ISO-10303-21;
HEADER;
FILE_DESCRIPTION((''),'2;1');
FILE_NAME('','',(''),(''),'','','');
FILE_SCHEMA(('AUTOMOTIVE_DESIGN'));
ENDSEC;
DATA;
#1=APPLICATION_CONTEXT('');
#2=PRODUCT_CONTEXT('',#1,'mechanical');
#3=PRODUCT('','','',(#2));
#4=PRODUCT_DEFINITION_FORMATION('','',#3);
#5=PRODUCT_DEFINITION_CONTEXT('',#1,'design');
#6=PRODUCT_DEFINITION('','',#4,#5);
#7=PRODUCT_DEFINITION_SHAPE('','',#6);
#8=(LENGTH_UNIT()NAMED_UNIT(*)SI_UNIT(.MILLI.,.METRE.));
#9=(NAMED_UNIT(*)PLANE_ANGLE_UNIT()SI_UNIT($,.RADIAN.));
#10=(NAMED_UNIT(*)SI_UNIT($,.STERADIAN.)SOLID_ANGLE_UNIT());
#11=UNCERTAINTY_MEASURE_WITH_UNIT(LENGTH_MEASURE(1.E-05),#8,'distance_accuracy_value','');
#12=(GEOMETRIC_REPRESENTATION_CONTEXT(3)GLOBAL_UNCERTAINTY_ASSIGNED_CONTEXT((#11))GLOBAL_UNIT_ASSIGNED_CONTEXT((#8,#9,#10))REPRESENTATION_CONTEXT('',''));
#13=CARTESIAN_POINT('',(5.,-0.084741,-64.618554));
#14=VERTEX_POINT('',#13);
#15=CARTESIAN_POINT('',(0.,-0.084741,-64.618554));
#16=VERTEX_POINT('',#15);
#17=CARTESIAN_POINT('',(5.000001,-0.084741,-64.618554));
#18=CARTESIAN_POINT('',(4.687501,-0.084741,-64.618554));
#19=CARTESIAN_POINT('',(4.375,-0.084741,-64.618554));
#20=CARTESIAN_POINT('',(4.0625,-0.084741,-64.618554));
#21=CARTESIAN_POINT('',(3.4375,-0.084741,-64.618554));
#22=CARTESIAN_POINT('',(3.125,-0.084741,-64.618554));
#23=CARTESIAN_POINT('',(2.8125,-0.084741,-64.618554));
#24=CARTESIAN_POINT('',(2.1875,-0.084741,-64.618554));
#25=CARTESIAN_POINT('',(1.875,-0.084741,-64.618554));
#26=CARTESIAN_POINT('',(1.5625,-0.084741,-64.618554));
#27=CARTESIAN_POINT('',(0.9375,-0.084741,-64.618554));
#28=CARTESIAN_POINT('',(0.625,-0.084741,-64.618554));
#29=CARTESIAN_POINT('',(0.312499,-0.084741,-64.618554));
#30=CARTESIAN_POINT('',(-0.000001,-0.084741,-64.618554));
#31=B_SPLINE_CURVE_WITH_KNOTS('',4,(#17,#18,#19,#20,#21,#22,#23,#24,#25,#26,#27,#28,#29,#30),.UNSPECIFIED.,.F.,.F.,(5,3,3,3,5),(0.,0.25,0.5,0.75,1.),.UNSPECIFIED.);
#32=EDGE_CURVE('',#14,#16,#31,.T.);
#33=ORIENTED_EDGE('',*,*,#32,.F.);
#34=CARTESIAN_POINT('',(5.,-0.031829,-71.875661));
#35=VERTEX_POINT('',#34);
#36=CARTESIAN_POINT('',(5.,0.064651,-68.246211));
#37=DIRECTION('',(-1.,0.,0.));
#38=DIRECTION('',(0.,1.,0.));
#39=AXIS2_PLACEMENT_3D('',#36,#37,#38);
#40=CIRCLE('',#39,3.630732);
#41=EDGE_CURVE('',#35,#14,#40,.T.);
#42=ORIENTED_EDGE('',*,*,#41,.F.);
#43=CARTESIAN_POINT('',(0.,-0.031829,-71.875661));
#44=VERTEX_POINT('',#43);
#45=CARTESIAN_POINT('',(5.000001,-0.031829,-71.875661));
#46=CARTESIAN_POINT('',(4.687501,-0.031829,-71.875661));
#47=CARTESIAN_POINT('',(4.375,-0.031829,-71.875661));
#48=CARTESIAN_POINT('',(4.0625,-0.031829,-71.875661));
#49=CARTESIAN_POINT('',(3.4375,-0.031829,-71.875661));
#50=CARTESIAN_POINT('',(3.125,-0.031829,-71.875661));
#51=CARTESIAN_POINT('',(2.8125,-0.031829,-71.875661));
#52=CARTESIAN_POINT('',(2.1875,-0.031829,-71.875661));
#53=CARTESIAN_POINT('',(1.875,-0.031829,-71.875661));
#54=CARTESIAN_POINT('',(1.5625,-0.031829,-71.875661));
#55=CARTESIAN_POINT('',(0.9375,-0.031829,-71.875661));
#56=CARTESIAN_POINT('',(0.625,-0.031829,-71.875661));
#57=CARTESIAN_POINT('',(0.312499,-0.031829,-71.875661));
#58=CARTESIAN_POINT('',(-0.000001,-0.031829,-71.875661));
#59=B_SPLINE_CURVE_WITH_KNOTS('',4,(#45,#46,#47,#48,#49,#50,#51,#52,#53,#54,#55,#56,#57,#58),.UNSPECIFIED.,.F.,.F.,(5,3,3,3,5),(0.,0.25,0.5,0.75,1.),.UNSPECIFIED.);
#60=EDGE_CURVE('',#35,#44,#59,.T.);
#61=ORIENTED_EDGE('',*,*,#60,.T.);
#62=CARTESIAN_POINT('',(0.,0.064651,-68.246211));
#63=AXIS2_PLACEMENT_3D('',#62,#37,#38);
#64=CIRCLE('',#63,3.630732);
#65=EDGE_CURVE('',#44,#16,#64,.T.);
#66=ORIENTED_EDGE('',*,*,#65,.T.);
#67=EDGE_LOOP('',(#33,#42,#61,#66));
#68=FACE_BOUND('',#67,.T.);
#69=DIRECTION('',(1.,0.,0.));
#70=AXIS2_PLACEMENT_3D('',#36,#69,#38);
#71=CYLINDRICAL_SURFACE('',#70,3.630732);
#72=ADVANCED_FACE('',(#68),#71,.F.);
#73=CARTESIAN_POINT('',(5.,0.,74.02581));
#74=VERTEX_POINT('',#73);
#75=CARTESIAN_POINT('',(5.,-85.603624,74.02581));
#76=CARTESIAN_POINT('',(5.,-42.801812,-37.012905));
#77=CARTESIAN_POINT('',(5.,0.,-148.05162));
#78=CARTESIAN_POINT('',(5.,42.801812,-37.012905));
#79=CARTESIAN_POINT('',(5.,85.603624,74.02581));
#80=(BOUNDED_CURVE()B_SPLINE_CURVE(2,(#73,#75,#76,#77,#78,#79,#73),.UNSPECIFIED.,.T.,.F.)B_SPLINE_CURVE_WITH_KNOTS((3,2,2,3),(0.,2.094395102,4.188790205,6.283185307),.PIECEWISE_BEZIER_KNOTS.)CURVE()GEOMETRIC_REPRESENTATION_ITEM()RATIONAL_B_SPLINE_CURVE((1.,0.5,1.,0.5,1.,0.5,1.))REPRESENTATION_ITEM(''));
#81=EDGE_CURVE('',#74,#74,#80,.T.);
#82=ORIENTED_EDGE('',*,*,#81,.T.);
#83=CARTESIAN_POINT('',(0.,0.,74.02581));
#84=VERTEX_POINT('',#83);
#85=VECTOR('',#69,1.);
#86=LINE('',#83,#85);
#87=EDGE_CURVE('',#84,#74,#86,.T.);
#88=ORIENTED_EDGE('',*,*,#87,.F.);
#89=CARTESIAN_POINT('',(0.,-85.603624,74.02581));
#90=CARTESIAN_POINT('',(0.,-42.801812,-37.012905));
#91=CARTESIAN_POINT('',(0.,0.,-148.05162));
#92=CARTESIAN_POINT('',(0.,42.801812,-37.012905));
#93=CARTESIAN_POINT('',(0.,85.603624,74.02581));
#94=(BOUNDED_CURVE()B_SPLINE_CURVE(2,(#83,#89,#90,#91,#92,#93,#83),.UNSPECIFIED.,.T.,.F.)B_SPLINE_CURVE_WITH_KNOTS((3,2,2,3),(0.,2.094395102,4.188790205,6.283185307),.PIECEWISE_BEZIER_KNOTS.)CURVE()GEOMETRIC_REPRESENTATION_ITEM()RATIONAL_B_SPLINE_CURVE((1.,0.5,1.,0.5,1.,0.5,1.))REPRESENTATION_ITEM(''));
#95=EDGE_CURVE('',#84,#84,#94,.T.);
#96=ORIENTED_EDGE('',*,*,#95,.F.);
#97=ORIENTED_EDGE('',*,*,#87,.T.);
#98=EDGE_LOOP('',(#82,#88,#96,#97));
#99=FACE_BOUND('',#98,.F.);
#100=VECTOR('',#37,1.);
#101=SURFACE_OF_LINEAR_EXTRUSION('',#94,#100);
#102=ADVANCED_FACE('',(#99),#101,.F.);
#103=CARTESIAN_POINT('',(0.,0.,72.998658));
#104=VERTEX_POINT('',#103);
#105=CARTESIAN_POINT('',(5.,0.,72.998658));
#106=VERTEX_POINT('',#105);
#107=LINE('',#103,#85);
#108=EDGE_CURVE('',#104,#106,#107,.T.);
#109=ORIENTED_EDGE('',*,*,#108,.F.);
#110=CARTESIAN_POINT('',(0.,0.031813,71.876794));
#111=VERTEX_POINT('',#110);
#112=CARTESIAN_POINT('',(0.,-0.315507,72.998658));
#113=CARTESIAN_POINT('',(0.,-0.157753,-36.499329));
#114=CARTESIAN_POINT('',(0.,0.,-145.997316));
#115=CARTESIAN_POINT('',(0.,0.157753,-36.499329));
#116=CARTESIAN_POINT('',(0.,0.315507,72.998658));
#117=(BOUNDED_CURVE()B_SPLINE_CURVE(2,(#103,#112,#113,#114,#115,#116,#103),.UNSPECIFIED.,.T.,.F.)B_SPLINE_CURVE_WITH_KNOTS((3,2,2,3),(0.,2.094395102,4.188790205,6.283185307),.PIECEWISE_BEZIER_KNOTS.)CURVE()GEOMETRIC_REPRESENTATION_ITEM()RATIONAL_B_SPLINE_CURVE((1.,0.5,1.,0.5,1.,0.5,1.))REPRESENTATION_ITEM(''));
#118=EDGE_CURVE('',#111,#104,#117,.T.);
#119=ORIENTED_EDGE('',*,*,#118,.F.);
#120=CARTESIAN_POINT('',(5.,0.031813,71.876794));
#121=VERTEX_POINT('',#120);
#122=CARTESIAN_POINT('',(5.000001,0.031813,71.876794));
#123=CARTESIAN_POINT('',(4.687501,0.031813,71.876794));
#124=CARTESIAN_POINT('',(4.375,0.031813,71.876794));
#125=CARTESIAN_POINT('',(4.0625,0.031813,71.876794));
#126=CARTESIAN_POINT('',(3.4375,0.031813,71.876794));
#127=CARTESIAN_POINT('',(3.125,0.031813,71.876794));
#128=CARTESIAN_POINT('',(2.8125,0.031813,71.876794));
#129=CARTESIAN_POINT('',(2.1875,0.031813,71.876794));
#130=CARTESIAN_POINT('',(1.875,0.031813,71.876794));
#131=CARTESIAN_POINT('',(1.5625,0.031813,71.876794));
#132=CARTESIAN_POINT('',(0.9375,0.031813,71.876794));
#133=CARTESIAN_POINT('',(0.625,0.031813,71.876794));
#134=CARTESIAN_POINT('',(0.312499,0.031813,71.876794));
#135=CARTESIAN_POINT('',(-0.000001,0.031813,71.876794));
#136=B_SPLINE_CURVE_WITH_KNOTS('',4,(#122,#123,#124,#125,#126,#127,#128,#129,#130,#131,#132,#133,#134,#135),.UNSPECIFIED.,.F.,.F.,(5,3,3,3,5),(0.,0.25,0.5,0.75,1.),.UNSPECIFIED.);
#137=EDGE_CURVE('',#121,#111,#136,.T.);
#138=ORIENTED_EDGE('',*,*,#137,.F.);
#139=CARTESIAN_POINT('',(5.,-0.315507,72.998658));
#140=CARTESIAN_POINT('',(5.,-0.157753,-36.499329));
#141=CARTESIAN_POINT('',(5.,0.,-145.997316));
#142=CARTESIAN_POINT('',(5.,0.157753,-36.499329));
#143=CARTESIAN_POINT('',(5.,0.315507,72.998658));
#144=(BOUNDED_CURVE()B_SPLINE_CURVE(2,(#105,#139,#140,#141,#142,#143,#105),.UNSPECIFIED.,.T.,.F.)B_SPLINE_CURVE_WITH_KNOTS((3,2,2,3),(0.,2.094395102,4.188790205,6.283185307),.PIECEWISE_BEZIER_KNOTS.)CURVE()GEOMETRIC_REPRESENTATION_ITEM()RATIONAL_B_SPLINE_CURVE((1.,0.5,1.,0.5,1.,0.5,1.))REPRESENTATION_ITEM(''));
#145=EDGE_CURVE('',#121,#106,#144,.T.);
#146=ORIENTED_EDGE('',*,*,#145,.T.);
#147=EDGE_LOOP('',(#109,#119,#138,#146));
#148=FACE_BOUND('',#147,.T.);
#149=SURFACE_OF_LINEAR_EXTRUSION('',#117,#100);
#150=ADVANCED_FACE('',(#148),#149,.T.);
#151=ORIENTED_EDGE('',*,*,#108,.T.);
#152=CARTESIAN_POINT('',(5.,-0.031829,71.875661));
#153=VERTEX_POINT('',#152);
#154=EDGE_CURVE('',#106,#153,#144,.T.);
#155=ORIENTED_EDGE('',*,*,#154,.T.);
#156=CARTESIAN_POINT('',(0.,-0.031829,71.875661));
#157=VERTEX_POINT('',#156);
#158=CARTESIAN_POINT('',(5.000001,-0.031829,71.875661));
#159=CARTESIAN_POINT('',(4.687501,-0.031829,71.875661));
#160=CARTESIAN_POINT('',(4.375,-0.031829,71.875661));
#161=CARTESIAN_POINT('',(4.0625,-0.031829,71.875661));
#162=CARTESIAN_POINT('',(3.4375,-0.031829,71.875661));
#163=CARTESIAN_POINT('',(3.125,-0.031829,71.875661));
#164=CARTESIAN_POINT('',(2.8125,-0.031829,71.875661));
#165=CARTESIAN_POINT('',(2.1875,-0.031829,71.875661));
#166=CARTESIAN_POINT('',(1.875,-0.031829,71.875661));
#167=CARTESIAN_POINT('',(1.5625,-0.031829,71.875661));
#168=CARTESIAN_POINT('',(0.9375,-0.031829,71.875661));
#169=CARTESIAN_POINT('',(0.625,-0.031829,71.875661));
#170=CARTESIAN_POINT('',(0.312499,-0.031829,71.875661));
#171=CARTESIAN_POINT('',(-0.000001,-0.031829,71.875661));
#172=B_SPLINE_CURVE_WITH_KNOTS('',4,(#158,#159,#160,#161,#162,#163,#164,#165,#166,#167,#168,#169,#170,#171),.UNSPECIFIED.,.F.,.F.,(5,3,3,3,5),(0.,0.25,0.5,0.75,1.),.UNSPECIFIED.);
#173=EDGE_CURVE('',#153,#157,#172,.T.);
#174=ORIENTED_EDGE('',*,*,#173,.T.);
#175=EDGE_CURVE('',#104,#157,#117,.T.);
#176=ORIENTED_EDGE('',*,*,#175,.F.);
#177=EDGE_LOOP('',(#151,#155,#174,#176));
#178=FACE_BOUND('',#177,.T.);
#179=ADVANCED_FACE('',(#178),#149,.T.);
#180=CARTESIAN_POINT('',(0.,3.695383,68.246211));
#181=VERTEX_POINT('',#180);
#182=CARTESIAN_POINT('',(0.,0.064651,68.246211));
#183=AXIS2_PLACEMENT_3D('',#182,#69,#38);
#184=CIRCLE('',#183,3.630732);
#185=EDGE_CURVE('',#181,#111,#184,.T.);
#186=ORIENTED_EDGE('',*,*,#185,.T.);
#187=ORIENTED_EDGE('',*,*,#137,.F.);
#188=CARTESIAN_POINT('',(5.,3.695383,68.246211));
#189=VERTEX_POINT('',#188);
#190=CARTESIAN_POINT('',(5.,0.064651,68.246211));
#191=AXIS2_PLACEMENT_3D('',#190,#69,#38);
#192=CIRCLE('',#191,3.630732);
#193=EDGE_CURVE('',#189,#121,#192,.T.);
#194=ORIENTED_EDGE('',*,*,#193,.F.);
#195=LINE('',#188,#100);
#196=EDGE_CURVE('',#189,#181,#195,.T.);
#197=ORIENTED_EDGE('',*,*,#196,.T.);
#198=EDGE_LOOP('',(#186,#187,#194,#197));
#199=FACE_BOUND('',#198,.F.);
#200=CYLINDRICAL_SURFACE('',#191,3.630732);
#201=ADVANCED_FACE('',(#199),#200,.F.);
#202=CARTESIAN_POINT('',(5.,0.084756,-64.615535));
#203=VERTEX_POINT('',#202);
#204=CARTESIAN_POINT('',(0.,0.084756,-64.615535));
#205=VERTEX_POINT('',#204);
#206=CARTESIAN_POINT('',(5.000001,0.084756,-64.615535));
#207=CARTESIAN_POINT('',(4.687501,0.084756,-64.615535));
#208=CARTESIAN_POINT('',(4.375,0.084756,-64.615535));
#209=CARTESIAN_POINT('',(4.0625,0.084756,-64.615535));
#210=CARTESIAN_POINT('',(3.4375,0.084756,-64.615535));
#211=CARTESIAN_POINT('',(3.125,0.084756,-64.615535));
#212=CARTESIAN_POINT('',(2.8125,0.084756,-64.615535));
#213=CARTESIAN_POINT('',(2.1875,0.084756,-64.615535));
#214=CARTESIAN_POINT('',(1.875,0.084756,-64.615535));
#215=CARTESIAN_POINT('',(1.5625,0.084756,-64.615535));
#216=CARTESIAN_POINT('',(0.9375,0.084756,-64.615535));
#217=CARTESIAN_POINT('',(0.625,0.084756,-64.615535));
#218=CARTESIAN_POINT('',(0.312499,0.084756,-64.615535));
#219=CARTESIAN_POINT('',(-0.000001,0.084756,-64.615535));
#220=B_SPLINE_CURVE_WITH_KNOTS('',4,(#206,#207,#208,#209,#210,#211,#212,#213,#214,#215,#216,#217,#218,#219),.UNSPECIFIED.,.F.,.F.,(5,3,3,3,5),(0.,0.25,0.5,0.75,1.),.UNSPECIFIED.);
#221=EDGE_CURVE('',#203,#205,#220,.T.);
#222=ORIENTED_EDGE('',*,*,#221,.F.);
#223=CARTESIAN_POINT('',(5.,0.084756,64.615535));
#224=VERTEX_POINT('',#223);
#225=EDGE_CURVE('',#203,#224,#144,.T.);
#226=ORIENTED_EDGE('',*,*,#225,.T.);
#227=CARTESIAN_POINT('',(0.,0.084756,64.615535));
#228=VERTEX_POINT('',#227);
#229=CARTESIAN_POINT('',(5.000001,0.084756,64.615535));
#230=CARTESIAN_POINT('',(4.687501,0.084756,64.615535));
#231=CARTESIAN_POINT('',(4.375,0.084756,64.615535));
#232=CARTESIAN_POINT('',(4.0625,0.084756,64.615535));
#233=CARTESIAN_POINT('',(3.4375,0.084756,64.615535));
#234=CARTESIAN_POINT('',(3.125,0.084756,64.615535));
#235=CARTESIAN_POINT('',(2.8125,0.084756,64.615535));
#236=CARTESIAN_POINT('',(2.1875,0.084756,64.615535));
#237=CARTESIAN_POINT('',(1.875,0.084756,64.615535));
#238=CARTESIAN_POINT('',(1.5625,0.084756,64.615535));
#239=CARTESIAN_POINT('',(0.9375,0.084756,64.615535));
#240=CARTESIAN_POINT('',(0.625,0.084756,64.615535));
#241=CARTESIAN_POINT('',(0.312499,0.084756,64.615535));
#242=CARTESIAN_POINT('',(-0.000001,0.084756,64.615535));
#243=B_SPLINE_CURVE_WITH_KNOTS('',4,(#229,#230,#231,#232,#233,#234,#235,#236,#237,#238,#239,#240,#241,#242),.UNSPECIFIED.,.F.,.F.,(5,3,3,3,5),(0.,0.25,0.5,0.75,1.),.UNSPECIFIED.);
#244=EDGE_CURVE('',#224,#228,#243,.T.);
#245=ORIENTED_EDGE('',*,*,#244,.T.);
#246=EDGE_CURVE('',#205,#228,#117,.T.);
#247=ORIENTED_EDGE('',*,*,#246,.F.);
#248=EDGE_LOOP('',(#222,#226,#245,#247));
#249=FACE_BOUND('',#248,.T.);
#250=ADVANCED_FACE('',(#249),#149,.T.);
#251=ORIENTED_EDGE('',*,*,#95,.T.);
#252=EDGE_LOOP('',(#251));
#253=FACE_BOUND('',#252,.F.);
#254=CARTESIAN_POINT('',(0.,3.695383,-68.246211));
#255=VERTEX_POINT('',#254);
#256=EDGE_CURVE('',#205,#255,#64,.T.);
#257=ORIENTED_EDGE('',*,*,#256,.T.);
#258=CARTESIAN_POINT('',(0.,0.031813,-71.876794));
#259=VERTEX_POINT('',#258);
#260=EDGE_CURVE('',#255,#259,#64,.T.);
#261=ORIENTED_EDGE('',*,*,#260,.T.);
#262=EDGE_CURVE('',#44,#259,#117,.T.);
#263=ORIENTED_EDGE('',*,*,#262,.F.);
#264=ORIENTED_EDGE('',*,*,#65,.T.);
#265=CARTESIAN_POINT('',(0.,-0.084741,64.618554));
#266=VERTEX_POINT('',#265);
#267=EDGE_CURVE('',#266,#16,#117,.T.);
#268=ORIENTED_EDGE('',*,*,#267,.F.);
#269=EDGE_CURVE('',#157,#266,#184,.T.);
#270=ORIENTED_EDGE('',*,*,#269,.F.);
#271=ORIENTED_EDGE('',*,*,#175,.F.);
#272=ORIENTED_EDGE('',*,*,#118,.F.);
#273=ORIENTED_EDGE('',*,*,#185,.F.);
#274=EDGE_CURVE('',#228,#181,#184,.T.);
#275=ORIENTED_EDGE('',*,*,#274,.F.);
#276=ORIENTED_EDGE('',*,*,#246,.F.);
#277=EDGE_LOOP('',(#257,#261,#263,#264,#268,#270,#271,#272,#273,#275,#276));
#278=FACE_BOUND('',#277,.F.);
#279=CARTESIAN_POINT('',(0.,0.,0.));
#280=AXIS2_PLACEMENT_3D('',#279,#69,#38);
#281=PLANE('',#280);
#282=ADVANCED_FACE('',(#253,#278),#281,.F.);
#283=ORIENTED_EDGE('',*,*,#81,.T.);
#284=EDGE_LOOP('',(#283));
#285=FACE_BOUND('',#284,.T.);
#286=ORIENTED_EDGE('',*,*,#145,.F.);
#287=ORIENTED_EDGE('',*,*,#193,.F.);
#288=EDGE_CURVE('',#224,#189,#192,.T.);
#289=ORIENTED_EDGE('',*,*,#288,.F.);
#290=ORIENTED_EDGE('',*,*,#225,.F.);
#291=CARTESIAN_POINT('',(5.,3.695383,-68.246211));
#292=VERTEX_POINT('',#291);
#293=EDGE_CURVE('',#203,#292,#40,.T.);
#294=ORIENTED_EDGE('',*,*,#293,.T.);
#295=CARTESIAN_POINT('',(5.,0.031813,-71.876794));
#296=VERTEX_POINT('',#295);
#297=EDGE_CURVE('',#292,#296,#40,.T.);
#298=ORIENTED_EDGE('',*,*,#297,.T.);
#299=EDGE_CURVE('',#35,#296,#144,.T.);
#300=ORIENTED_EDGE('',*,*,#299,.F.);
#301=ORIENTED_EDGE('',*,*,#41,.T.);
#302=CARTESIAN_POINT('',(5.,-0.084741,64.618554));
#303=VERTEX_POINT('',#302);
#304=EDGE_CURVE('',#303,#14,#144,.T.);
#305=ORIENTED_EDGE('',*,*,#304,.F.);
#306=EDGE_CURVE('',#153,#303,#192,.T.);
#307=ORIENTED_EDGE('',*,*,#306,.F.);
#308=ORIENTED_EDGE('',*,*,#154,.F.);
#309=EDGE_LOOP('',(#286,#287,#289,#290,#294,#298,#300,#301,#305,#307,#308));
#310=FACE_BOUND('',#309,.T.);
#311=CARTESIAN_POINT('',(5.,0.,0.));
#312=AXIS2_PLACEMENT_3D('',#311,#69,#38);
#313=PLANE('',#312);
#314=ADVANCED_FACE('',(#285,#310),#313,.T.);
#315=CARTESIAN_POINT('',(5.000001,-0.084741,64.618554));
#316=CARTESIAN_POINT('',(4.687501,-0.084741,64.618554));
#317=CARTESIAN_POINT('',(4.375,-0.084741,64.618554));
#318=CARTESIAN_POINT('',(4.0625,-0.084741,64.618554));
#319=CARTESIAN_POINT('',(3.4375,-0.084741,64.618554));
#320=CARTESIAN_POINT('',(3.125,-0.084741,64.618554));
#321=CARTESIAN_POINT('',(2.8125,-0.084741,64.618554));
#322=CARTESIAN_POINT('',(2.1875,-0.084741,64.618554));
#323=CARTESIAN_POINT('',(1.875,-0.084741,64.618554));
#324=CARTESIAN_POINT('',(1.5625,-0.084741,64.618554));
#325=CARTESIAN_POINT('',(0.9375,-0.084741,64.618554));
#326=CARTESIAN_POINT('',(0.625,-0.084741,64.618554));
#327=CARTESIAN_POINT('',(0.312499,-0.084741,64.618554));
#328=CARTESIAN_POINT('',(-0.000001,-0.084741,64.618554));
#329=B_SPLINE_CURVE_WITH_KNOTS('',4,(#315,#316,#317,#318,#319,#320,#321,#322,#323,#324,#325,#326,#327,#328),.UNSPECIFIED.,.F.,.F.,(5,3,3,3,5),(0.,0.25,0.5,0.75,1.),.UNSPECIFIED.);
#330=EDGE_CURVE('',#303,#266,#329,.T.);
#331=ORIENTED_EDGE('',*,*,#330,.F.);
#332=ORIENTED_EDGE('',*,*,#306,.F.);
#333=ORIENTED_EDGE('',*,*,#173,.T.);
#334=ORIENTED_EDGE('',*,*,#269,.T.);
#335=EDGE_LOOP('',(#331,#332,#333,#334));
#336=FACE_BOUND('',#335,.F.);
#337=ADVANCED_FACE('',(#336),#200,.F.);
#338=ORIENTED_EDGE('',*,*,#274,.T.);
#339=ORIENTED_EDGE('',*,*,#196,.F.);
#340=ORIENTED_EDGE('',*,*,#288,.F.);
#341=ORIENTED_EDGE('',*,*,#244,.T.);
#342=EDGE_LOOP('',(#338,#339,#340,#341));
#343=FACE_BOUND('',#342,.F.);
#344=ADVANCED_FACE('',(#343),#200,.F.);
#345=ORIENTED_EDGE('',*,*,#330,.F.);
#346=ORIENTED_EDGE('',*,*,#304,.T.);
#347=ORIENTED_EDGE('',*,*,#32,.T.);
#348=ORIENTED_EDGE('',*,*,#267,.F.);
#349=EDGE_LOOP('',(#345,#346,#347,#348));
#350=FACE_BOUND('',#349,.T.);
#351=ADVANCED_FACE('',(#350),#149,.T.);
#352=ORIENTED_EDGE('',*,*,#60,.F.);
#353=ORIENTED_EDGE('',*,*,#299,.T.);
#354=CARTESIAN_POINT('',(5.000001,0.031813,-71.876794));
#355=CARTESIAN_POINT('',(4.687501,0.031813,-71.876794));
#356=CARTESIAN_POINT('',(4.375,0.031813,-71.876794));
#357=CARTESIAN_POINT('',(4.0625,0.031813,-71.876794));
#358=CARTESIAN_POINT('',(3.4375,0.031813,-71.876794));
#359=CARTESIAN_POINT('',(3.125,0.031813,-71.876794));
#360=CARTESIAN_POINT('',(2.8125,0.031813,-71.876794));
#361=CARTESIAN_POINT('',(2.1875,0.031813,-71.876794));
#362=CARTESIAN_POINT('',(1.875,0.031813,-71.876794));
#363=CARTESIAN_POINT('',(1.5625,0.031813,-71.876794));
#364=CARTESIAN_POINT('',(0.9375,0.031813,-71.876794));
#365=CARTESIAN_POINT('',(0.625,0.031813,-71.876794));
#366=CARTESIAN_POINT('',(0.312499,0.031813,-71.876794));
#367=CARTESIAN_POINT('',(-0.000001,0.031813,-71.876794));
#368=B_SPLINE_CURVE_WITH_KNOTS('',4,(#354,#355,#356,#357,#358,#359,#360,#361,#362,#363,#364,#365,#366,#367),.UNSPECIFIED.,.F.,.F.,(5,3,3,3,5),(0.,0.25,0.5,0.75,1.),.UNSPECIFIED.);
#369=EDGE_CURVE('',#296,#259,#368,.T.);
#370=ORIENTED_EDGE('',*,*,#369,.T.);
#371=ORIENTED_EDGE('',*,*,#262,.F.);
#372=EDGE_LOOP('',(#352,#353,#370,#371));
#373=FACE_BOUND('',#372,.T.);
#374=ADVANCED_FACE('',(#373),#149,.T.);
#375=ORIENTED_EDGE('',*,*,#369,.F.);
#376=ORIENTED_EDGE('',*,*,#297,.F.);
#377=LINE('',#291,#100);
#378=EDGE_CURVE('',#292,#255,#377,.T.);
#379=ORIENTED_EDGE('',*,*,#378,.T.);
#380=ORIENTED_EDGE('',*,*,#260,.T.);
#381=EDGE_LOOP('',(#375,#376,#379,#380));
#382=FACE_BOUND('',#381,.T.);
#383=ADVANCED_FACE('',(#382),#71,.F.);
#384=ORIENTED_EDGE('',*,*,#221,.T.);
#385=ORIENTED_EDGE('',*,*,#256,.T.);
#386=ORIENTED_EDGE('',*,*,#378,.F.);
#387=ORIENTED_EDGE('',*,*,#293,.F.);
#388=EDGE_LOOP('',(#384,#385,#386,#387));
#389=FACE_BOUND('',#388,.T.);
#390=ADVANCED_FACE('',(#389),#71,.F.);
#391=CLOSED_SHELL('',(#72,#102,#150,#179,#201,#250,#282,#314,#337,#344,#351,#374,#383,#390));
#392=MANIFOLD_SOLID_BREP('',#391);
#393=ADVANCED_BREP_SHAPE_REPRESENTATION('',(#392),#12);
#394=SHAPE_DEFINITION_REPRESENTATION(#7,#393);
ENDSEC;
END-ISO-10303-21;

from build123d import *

# Parameters (mm, degrees)
F1_DEPTH = 5
F2_R     = 3.6307317185
F3_DEPTH = 5


# Not quite as in the source:
# - a pattern or mirror of a feature is missing from the dataset's text; its kind, count and spacing are read off the source's solid


with BuildPart() as f1:
    # F0 (on Right) → F1 (new body)
    with BuildSketch(Plane.YZ):
        with BuildLine():
            add(Edge.make_bspline(
                [(0, 74.0258097649), (-85.6036238732, 74.0258097649), (-42.8018119366, -37.0129048824), (0, -148.0516195297), (42.8018119366, -37.0129048824), (85.6036238732, 74.0258097649), (0, 74.0258097649)],
                knots=[0, 0, 0, 2.0943951024, 2.0943951024, 4.1887902048, 4.1887902048, 6.2831853072, 6.2831853072, 6.2831853072], degree=2, weights=[1, 0.5, 1, 0.5, 1, 0.5, 1]))
        make_face()
        with BuildLine():
            add(Edge.make_bspline(
                [(0, 72.9986578226), (-0.3155069903, 72.9986578226), (-0.1577534952, -36.4993289113), (0, -145.9973156452), (0.1577534952, -36.4993289113), (0.3155069903, 72.9986578226), (0, 72.9986578226)],
                knots=[0, 0, 0, 2.0943951024, 2.0943951024, 4.1887902048, 4.1887902048, 6.2831853072, 6.2831853072, 6.2831853072], degree=2, weights=[1, 0.5, 1, 0.5, 1, 0.5, 1]))
        make_face(mode=Mode.SUBTRACT)
    extrude(amount=F1_DEPTH)

    # F2 (on face) → F3 (cut)
    with BuildSketch(Plane.YZ.offset(5)):
        with Locations((0.0646514759, 68.2462112828)):
            Circle(F2_R)
    f3 = extrude(amount=-F3_DEPTH, mode=Mode.SUBTRACT)

    # F3_copies: F3 across plane
    add(f3.mirror(Plane(origin=(0, 0, 0), x_dir=(-1, 0, 0), z_dir=(0, 0, -1))), mode=Mode.SUBTRACT)


solid = f1.part
